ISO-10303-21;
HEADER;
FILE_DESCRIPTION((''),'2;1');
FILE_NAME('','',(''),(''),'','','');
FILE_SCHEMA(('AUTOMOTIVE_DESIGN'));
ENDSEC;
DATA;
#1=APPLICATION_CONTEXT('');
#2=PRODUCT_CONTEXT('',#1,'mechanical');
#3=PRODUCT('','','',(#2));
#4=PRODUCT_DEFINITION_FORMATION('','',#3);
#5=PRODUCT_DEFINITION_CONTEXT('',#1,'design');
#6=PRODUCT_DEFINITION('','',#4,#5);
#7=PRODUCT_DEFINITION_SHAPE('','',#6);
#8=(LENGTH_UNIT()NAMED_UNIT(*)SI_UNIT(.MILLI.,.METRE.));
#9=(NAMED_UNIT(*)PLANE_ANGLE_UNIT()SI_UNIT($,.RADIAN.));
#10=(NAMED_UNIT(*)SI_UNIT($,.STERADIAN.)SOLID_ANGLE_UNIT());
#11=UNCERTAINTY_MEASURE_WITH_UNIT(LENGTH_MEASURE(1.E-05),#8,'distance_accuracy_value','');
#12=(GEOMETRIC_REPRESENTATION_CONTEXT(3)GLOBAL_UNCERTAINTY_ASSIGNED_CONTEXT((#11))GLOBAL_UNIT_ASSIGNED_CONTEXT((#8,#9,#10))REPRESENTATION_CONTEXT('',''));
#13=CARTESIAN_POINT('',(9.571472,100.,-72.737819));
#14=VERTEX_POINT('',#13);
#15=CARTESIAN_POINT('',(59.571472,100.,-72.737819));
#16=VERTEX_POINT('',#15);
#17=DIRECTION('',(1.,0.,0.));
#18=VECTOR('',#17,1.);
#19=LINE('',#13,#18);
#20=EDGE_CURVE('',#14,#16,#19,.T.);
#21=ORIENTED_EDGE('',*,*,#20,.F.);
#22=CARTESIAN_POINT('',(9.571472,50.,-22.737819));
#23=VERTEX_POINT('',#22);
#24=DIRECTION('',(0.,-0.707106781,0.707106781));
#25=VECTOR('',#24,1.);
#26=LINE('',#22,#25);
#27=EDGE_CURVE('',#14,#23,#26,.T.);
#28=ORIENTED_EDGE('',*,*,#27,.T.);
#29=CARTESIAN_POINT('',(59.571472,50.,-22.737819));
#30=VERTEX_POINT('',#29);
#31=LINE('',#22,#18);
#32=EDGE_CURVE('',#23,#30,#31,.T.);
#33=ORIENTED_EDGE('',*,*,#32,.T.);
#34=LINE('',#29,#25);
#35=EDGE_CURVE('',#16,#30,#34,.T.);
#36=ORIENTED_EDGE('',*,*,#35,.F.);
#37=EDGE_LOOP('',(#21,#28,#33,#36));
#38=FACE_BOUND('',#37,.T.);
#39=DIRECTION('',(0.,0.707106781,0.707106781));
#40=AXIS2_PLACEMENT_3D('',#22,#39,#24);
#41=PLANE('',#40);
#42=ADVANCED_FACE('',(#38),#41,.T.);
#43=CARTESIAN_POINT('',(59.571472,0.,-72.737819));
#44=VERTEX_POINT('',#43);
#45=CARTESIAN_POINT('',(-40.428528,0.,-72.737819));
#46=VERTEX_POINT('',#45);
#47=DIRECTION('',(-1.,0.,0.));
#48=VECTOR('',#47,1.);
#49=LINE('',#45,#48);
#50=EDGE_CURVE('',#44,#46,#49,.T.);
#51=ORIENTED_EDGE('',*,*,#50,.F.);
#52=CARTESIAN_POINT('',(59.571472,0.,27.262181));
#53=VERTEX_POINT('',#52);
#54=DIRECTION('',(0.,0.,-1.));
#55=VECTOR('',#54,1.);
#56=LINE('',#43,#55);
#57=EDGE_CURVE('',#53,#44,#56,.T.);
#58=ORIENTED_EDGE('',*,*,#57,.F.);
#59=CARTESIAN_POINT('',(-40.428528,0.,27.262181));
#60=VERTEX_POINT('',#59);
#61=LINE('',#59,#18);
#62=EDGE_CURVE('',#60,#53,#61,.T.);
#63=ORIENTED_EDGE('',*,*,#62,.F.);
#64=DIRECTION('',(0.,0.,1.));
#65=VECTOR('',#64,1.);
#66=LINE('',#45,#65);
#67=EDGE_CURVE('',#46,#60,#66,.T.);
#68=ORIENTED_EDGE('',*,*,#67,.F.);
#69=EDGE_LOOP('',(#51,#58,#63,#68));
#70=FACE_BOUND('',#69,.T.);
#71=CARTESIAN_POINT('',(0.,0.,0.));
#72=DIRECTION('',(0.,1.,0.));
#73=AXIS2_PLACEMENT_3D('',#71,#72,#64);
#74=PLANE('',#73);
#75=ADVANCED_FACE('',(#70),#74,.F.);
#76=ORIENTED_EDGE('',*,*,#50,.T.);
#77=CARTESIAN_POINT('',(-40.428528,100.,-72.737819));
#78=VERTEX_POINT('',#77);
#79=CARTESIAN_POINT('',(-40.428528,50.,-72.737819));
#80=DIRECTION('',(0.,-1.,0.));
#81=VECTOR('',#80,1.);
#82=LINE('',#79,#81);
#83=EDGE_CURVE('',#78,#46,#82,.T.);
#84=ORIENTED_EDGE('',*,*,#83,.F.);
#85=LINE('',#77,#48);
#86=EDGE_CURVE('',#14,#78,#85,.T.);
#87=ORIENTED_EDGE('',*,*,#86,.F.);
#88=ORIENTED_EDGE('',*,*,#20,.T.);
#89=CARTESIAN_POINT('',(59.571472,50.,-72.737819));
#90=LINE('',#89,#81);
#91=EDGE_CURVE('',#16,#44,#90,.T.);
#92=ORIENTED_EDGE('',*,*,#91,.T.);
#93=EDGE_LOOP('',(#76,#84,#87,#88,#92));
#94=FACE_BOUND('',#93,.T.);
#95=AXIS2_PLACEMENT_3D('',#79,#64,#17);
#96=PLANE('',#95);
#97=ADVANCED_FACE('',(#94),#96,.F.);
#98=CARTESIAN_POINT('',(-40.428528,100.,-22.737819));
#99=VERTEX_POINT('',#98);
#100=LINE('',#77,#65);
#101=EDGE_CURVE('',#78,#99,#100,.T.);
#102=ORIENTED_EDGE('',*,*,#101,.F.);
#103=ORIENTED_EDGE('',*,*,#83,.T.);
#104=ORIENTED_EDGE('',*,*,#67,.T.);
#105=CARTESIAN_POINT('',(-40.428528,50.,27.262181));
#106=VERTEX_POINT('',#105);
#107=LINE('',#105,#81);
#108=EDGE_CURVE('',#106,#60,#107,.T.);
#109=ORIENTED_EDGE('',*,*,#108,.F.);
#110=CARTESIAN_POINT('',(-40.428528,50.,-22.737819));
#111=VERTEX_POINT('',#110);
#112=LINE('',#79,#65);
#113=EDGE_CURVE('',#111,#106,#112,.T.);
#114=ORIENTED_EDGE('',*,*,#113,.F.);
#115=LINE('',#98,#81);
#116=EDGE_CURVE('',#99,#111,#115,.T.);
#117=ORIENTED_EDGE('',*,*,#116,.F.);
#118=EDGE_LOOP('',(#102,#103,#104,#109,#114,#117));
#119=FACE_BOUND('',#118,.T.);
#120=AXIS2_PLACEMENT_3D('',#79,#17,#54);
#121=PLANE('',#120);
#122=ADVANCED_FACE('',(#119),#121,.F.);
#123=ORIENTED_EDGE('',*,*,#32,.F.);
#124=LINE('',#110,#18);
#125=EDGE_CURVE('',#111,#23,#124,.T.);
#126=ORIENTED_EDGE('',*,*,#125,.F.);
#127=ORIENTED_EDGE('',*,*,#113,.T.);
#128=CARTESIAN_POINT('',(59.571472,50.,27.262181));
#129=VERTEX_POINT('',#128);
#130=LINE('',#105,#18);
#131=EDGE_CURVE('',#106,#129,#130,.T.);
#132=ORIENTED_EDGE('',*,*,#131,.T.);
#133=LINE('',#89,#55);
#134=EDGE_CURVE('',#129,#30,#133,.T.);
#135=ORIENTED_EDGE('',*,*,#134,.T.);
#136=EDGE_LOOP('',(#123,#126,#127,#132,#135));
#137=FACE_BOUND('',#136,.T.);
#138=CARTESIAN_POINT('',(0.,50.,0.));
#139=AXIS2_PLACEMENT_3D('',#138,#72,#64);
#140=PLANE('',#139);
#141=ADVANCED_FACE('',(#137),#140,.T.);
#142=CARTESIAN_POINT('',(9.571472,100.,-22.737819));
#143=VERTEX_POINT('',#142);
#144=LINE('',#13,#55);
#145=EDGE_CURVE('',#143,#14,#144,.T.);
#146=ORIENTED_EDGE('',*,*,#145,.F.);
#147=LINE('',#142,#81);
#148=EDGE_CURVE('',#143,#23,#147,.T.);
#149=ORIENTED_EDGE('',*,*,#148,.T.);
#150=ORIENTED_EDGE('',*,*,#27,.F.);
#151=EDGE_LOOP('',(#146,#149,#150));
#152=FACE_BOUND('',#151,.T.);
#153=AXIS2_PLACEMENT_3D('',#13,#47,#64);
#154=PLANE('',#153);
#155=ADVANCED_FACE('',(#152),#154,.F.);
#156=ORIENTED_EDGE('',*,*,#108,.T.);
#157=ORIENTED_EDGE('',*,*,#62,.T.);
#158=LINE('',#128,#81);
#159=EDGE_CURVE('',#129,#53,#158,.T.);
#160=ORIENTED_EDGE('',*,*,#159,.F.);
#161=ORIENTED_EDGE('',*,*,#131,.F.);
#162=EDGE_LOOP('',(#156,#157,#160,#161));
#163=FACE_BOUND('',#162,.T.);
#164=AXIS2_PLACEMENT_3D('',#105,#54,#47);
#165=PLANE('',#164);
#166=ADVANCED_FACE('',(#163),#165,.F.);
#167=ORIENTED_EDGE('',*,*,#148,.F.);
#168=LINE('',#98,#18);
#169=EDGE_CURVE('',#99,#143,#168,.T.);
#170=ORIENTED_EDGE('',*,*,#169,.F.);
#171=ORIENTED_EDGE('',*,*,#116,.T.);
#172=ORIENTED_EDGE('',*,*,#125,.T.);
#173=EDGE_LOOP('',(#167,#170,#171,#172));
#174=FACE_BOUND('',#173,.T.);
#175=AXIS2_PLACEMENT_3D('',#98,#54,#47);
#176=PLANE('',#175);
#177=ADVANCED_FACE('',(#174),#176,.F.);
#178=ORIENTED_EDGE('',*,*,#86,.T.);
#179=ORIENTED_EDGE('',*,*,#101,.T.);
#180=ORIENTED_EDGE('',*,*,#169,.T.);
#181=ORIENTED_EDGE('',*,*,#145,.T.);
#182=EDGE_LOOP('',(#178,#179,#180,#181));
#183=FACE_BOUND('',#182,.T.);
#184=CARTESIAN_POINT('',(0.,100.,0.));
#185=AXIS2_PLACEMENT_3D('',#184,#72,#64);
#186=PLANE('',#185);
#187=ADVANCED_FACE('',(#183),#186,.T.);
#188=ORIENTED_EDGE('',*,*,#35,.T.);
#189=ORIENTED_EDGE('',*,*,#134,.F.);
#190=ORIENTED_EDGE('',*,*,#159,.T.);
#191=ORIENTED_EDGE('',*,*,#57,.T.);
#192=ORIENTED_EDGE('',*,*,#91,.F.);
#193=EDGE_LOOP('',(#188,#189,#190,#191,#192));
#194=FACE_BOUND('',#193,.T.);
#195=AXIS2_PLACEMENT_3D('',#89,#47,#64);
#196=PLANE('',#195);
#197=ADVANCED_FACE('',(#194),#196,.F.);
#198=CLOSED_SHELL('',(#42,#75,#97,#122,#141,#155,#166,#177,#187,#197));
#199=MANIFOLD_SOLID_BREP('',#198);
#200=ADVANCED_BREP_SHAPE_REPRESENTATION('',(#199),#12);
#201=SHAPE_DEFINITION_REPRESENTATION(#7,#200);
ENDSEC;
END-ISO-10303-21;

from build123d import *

# Parameters (mm, degrees)
CROQUIS1_W              = 100
CROQUIS1_H              = 100
SALIENTE_EXTRUIR1_DEPTH = 50
CROQUIS2_W              = 50
CROQUIS2_H              = 50
SALIENTE_EXTRUIR3_DEPTH = 50
SALIENTE_EXTRUIR4_DEPTH = 50


with BuildPart() as part:
    # Croquis1 → Saliente-Extruir1 (new body)
    with BuildSketch(Plane(origin=(0, 0, 0), x_dir=(1, 0, 0), z_dir=(0, 1, 0))):
        with Locations((9.571472252, 22.737819026)):
            Rectangle(CROQUIS1_W, CROQUIS1_H)
    extrude(amount=SALIENTE_EXTRUIR1_DEPTH)

    # Croquis2 → Saliente-Extruir3 (add)
    with BuildSketch(Plane(origin=(0, 50, 0), x_dir=(1, 0, 0), z_dir=(0, 1, 0))):
        with Locations((-15.428527748, 47.737819026)):
            Rectangle(CROQUIS2_W, CROQUIS2_H)
    extrude(amount=SALIENTE_EXTRUIR3_DEPTH)

    # Croquis3 → Saliente-Extruir4 (add)
    with BuildSketch(Plane(origin=(59.571472252, 0, 0), x_dir=(0, 0, -1), z_dir=(1, 0, 0))):
        Polygon((22.737819026, 50), (72.737819026, 100), (72.737819026, 50), align=None)
    extrude(amount=-SALIENTE_EXTRUIR4_DEPTH)


solid = part.part
